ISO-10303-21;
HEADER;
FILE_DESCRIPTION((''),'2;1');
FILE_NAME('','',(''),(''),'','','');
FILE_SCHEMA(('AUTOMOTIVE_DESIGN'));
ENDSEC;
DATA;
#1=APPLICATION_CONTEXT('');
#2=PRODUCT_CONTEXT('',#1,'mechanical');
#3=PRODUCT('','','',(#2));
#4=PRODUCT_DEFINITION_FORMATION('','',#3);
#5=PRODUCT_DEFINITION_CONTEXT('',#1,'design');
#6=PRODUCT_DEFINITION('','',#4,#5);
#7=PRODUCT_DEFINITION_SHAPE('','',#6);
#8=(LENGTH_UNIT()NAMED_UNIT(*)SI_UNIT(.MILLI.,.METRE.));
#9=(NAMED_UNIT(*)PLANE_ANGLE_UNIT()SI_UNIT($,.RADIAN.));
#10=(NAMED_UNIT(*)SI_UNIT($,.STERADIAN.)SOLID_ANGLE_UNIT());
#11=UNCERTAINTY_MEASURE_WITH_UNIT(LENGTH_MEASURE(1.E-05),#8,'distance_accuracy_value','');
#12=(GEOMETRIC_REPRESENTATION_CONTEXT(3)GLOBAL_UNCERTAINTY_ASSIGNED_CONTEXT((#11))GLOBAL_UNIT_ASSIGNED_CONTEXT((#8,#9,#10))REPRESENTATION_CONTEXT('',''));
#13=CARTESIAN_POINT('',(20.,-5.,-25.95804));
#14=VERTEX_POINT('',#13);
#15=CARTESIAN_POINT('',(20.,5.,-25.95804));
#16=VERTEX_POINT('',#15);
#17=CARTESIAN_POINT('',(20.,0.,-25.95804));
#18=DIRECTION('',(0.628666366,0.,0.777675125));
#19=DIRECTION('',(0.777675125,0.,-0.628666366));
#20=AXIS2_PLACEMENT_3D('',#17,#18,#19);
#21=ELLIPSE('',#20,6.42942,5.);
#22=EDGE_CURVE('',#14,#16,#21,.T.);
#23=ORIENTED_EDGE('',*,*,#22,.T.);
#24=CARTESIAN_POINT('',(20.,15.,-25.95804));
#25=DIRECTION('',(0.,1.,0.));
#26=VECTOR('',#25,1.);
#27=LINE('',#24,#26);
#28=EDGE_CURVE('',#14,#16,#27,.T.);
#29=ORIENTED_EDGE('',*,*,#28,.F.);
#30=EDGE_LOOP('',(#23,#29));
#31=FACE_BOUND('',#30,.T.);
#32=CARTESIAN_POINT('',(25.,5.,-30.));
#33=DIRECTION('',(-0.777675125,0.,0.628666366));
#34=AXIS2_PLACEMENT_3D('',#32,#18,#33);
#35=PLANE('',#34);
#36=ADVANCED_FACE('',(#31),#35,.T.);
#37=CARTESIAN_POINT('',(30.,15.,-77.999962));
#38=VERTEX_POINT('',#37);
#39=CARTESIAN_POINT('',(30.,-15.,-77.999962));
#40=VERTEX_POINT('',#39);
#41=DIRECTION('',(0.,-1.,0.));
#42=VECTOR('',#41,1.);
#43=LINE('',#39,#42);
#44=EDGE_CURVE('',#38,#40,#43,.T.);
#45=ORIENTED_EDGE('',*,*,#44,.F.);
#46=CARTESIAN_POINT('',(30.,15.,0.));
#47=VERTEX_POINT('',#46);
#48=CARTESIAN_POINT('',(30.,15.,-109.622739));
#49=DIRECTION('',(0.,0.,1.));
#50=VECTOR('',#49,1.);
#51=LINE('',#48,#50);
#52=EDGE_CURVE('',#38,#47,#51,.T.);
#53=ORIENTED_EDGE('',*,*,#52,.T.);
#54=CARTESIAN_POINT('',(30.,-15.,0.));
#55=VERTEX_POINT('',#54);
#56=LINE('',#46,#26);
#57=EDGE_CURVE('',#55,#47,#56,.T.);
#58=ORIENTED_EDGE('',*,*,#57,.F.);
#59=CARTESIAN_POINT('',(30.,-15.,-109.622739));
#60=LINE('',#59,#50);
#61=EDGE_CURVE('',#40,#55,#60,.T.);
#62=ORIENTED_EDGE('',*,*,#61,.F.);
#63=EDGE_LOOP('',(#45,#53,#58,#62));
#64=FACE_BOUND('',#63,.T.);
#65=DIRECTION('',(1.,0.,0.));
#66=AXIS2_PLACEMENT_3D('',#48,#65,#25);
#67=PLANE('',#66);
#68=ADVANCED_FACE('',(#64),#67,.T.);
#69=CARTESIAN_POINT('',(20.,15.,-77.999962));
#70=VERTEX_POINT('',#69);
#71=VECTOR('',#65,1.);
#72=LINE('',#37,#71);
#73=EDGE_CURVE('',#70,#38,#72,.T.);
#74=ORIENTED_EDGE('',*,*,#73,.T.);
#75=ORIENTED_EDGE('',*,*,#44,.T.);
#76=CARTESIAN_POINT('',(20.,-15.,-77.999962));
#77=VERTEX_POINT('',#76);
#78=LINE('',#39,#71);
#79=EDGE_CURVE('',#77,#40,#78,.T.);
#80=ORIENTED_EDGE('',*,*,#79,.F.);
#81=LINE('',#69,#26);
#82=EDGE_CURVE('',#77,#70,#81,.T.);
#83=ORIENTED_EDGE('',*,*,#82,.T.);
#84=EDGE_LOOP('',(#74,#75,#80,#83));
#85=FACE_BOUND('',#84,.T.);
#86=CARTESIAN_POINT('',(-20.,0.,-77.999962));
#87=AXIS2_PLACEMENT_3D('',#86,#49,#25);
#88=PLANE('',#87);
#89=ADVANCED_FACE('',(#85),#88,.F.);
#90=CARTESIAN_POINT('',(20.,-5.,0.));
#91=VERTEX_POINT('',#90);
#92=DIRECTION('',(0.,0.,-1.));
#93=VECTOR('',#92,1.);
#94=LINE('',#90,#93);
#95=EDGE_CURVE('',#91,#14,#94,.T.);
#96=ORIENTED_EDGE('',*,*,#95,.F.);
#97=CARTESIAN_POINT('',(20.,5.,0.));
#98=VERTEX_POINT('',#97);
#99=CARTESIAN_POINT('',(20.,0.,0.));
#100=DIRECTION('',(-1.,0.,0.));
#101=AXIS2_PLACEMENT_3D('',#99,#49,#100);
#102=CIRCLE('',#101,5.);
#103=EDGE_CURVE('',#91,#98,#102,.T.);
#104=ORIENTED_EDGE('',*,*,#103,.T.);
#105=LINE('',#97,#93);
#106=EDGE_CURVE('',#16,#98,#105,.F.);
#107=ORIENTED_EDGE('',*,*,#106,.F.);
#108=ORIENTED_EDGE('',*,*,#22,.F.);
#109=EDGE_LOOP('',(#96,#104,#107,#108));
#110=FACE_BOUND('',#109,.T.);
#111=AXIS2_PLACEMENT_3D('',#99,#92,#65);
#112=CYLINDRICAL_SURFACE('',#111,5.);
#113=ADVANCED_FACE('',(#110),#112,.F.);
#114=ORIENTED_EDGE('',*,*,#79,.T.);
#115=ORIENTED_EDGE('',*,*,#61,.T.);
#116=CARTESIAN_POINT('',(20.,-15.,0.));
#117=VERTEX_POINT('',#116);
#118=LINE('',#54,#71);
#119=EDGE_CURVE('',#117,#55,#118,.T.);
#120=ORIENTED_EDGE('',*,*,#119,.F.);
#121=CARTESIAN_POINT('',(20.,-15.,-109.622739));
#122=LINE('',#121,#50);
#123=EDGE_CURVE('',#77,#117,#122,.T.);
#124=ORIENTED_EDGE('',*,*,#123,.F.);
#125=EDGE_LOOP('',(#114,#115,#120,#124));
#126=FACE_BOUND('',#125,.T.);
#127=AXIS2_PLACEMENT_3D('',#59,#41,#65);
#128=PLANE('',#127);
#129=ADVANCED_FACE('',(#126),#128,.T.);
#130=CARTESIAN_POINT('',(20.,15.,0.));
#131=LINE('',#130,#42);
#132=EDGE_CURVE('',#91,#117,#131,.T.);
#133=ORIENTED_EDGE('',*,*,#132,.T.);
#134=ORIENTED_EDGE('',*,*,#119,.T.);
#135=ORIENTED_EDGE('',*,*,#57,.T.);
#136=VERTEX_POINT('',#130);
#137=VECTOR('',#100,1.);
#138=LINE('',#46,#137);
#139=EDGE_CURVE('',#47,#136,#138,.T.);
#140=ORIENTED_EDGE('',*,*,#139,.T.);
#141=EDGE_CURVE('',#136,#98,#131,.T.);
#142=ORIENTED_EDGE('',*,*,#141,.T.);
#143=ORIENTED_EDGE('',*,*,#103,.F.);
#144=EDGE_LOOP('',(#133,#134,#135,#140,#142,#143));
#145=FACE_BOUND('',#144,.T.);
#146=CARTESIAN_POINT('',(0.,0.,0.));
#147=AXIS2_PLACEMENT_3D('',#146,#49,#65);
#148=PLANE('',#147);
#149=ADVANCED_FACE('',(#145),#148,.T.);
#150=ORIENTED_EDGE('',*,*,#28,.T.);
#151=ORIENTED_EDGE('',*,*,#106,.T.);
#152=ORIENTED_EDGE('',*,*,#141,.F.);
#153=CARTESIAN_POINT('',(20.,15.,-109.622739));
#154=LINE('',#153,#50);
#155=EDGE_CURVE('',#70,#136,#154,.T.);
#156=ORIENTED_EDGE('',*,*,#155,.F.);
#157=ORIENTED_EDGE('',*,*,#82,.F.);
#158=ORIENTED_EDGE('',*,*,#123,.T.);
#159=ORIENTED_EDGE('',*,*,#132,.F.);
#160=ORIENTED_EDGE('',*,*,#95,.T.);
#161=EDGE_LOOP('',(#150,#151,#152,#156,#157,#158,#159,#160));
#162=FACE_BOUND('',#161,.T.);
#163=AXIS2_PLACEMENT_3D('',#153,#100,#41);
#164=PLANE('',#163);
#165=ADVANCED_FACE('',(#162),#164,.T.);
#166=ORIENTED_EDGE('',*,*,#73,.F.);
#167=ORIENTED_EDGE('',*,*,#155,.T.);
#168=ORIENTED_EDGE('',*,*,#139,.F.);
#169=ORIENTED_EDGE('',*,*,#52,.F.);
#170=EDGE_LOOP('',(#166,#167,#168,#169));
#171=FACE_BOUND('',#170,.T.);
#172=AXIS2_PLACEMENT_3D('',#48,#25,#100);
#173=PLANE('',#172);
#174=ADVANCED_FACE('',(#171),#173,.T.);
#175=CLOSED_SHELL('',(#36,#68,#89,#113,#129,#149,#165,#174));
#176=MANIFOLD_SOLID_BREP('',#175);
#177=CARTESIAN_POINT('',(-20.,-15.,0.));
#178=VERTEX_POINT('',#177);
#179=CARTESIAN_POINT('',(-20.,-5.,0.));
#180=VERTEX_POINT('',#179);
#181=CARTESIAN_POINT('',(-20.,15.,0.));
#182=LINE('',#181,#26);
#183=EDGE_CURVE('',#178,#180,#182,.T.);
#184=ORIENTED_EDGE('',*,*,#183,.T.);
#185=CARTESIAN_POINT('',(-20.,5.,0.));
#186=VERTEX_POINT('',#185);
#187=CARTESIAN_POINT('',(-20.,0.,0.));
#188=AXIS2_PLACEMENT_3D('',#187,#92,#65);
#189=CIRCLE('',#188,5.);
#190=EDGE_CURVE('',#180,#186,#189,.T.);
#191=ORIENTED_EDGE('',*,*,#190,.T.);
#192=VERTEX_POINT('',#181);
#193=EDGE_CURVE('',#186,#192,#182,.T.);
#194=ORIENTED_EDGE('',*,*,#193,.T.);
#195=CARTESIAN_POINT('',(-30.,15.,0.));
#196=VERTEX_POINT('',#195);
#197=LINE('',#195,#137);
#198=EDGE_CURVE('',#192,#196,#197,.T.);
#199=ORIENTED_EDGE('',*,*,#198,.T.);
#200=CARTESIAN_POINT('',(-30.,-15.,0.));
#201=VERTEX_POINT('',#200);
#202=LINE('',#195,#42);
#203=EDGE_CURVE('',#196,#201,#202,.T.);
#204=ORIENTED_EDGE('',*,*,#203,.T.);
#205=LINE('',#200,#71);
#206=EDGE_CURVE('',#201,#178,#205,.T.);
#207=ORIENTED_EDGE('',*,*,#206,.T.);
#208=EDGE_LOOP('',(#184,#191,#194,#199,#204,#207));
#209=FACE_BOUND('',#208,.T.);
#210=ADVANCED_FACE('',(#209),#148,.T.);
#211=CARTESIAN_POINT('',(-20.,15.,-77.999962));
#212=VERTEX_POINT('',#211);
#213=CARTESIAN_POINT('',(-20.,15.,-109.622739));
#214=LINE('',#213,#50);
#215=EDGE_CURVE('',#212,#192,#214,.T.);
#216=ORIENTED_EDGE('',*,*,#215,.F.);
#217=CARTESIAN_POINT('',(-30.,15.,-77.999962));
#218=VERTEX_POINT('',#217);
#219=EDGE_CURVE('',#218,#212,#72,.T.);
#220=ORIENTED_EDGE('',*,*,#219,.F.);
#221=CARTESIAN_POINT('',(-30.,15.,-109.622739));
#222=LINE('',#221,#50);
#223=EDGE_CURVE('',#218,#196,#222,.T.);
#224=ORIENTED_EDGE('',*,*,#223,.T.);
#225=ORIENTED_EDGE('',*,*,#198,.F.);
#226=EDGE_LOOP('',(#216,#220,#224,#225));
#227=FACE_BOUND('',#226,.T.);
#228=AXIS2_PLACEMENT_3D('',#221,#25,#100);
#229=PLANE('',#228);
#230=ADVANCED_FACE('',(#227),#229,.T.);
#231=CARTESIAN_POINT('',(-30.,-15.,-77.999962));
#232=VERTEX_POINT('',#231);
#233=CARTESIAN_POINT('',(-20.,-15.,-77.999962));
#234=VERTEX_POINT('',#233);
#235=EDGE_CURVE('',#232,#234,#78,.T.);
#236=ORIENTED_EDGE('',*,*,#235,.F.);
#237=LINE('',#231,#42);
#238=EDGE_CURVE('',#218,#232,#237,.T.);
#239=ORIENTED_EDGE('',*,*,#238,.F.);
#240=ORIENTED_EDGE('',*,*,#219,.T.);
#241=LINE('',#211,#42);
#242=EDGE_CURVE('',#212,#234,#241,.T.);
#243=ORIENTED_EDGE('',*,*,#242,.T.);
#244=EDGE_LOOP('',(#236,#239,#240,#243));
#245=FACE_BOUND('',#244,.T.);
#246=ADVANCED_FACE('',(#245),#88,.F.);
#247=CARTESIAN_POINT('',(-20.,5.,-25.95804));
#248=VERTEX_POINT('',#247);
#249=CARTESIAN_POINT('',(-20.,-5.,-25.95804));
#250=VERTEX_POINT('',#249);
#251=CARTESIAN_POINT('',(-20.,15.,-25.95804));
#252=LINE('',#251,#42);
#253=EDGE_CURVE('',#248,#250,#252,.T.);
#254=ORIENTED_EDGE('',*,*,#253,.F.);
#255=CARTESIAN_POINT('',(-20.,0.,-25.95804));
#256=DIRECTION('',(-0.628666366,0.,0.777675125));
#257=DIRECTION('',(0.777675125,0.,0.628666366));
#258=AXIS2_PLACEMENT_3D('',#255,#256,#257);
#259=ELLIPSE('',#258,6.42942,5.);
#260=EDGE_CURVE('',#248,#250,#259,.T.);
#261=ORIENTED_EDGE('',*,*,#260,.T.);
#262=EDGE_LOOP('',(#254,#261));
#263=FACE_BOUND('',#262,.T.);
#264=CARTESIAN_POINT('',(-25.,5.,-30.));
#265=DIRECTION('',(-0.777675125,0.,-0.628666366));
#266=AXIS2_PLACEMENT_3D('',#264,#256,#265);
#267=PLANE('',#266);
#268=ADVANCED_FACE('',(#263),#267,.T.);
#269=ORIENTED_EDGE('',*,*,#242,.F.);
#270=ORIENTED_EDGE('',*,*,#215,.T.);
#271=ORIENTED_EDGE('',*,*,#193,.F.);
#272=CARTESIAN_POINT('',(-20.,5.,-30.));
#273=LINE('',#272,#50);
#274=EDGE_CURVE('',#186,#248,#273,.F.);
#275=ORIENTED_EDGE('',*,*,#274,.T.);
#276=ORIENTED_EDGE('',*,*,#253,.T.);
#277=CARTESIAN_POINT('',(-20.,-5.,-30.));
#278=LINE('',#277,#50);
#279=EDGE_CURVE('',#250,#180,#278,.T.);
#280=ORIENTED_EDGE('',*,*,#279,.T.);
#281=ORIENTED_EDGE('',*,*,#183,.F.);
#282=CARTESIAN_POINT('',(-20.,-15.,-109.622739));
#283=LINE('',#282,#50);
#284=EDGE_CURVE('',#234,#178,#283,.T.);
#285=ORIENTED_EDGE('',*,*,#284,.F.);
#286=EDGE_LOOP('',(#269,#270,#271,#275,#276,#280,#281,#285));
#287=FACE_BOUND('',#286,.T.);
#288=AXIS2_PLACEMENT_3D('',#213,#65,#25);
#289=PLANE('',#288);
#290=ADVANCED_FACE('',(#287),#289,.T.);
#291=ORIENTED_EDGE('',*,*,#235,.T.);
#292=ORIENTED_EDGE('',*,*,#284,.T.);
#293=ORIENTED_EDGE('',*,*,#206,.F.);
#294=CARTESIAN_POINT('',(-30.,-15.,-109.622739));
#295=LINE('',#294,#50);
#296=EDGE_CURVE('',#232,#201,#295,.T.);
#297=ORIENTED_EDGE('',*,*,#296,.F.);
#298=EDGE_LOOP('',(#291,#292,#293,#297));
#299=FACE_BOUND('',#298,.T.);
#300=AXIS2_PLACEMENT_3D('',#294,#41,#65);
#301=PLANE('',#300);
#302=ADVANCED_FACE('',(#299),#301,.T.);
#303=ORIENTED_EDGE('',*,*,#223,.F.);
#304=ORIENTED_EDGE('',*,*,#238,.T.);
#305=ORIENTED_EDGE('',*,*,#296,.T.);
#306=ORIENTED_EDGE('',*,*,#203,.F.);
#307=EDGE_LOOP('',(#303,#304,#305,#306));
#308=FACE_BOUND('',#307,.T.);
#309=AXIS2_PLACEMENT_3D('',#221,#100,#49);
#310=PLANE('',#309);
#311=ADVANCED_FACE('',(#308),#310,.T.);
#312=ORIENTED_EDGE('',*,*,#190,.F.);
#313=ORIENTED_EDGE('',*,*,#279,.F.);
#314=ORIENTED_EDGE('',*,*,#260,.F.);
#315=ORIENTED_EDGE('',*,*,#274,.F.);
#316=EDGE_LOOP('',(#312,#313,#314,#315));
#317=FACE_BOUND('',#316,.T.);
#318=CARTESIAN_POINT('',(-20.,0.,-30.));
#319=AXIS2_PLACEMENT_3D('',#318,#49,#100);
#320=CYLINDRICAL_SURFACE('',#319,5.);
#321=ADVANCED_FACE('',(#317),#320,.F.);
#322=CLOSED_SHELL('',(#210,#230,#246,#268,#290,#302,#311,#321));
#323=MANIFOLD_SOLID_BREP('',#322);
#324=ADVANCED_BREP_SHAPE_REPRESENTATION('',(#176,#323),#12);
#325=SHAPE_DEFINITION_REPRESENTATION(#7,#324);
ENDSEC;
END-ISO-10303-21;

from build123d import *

# Parameters (mm, degrees)
SKETCH1_W             = 10
SKETCH1_H             = 30
BOSS_EXTRUDE2_DEPTH   = 77.999962115
BOSS_EXTRUDE2_2_DEPTH = 77.999962115
CAVITY1_START         = -30
CAVITY1_DEPTH         = 30
CAVITY1_START_2       = -6
CAVITY1_2_DEPTH       = 12
CAVITY1_3_DEPTH       = 30
CAVITY1_4_DEPTH       = 12


with BuildPart() as part:
    # Sketch1 → Boss-Extrude2 (new body)
    with BuildSketch(Plane.XY):
        with Locations((-25, 0)):
            Rectangle(SKETCH1_W, SKETCH1_H)
    extrude(amount=-BOSS_EXTRUDE2_DEPTH)

    # Cavity1 3 outline → Cavity1 3 (cut)
    with BuildSketch(Plane.XY.offset(CAVITY1_START)):
        with BuildLine():
            Line((-20, -5), (-20, 5))
            ThreePointArc((-20, 5), (-25, 0), (-20, -5))
        make_face()
    extrude(amount=CAVITY1_3_DEPTH, mode=Mode.SUBTRACT)

    # Cavity1 4 outline → Cavity1 4 (add)
    with BuildSketch(Plane(origin=(0, 0, 0), x_dir=(1, 0, 0), z_dir=(0, 1, 0)).offset(CAVITY1_START_2)):
        Polygon((-20, 30), (-25, 30), (-20, 25.958039892), align=None)
    extrude(amount=CAVITY1_4_DEPTH)


with BuildPart() as body_2:
    # Sketch1 → Boss-Extrude2 2 (new body)
    with BuildSketch(Plane.XY):
        with Locations((25, 0)):
            Rectangle(SKETCH1_W, SKETCH1_H)
    extrude(amount=-BOSS_EXTRUDE2_2_DEPTH)

    # Cavity1: read off the stored shape, not the designer's step
    # Cavity1 outline → Cavity1 (cut)
    with BuildSketch(Plane.XY.offset(CAVITY1_START)):
        with BuildLine():
            ThreePointArc((20, -5), (25, 0), (20, 5))
            Line((20, 5), (20, -5))
        make_face()
    extrude(amount=CAVITY1_DEPTH, mode=Mode.SUBTRACT)

    # Cavity1 2 outline → Cavity1 2 (add)
    with BuildSketch(Plane(origin=(0, 0, 0), x_dir=(1, 0, 0), z_dir=(0, 1, 0)).offset(CAVITY1_START_2)):
        Polygon((20, 30), (20, 25.958039892), (25, 30), align=None)
    extrude(amount=CAVITY1_2_DEPTH)


solid = Compound([part.part, body_2.part])
